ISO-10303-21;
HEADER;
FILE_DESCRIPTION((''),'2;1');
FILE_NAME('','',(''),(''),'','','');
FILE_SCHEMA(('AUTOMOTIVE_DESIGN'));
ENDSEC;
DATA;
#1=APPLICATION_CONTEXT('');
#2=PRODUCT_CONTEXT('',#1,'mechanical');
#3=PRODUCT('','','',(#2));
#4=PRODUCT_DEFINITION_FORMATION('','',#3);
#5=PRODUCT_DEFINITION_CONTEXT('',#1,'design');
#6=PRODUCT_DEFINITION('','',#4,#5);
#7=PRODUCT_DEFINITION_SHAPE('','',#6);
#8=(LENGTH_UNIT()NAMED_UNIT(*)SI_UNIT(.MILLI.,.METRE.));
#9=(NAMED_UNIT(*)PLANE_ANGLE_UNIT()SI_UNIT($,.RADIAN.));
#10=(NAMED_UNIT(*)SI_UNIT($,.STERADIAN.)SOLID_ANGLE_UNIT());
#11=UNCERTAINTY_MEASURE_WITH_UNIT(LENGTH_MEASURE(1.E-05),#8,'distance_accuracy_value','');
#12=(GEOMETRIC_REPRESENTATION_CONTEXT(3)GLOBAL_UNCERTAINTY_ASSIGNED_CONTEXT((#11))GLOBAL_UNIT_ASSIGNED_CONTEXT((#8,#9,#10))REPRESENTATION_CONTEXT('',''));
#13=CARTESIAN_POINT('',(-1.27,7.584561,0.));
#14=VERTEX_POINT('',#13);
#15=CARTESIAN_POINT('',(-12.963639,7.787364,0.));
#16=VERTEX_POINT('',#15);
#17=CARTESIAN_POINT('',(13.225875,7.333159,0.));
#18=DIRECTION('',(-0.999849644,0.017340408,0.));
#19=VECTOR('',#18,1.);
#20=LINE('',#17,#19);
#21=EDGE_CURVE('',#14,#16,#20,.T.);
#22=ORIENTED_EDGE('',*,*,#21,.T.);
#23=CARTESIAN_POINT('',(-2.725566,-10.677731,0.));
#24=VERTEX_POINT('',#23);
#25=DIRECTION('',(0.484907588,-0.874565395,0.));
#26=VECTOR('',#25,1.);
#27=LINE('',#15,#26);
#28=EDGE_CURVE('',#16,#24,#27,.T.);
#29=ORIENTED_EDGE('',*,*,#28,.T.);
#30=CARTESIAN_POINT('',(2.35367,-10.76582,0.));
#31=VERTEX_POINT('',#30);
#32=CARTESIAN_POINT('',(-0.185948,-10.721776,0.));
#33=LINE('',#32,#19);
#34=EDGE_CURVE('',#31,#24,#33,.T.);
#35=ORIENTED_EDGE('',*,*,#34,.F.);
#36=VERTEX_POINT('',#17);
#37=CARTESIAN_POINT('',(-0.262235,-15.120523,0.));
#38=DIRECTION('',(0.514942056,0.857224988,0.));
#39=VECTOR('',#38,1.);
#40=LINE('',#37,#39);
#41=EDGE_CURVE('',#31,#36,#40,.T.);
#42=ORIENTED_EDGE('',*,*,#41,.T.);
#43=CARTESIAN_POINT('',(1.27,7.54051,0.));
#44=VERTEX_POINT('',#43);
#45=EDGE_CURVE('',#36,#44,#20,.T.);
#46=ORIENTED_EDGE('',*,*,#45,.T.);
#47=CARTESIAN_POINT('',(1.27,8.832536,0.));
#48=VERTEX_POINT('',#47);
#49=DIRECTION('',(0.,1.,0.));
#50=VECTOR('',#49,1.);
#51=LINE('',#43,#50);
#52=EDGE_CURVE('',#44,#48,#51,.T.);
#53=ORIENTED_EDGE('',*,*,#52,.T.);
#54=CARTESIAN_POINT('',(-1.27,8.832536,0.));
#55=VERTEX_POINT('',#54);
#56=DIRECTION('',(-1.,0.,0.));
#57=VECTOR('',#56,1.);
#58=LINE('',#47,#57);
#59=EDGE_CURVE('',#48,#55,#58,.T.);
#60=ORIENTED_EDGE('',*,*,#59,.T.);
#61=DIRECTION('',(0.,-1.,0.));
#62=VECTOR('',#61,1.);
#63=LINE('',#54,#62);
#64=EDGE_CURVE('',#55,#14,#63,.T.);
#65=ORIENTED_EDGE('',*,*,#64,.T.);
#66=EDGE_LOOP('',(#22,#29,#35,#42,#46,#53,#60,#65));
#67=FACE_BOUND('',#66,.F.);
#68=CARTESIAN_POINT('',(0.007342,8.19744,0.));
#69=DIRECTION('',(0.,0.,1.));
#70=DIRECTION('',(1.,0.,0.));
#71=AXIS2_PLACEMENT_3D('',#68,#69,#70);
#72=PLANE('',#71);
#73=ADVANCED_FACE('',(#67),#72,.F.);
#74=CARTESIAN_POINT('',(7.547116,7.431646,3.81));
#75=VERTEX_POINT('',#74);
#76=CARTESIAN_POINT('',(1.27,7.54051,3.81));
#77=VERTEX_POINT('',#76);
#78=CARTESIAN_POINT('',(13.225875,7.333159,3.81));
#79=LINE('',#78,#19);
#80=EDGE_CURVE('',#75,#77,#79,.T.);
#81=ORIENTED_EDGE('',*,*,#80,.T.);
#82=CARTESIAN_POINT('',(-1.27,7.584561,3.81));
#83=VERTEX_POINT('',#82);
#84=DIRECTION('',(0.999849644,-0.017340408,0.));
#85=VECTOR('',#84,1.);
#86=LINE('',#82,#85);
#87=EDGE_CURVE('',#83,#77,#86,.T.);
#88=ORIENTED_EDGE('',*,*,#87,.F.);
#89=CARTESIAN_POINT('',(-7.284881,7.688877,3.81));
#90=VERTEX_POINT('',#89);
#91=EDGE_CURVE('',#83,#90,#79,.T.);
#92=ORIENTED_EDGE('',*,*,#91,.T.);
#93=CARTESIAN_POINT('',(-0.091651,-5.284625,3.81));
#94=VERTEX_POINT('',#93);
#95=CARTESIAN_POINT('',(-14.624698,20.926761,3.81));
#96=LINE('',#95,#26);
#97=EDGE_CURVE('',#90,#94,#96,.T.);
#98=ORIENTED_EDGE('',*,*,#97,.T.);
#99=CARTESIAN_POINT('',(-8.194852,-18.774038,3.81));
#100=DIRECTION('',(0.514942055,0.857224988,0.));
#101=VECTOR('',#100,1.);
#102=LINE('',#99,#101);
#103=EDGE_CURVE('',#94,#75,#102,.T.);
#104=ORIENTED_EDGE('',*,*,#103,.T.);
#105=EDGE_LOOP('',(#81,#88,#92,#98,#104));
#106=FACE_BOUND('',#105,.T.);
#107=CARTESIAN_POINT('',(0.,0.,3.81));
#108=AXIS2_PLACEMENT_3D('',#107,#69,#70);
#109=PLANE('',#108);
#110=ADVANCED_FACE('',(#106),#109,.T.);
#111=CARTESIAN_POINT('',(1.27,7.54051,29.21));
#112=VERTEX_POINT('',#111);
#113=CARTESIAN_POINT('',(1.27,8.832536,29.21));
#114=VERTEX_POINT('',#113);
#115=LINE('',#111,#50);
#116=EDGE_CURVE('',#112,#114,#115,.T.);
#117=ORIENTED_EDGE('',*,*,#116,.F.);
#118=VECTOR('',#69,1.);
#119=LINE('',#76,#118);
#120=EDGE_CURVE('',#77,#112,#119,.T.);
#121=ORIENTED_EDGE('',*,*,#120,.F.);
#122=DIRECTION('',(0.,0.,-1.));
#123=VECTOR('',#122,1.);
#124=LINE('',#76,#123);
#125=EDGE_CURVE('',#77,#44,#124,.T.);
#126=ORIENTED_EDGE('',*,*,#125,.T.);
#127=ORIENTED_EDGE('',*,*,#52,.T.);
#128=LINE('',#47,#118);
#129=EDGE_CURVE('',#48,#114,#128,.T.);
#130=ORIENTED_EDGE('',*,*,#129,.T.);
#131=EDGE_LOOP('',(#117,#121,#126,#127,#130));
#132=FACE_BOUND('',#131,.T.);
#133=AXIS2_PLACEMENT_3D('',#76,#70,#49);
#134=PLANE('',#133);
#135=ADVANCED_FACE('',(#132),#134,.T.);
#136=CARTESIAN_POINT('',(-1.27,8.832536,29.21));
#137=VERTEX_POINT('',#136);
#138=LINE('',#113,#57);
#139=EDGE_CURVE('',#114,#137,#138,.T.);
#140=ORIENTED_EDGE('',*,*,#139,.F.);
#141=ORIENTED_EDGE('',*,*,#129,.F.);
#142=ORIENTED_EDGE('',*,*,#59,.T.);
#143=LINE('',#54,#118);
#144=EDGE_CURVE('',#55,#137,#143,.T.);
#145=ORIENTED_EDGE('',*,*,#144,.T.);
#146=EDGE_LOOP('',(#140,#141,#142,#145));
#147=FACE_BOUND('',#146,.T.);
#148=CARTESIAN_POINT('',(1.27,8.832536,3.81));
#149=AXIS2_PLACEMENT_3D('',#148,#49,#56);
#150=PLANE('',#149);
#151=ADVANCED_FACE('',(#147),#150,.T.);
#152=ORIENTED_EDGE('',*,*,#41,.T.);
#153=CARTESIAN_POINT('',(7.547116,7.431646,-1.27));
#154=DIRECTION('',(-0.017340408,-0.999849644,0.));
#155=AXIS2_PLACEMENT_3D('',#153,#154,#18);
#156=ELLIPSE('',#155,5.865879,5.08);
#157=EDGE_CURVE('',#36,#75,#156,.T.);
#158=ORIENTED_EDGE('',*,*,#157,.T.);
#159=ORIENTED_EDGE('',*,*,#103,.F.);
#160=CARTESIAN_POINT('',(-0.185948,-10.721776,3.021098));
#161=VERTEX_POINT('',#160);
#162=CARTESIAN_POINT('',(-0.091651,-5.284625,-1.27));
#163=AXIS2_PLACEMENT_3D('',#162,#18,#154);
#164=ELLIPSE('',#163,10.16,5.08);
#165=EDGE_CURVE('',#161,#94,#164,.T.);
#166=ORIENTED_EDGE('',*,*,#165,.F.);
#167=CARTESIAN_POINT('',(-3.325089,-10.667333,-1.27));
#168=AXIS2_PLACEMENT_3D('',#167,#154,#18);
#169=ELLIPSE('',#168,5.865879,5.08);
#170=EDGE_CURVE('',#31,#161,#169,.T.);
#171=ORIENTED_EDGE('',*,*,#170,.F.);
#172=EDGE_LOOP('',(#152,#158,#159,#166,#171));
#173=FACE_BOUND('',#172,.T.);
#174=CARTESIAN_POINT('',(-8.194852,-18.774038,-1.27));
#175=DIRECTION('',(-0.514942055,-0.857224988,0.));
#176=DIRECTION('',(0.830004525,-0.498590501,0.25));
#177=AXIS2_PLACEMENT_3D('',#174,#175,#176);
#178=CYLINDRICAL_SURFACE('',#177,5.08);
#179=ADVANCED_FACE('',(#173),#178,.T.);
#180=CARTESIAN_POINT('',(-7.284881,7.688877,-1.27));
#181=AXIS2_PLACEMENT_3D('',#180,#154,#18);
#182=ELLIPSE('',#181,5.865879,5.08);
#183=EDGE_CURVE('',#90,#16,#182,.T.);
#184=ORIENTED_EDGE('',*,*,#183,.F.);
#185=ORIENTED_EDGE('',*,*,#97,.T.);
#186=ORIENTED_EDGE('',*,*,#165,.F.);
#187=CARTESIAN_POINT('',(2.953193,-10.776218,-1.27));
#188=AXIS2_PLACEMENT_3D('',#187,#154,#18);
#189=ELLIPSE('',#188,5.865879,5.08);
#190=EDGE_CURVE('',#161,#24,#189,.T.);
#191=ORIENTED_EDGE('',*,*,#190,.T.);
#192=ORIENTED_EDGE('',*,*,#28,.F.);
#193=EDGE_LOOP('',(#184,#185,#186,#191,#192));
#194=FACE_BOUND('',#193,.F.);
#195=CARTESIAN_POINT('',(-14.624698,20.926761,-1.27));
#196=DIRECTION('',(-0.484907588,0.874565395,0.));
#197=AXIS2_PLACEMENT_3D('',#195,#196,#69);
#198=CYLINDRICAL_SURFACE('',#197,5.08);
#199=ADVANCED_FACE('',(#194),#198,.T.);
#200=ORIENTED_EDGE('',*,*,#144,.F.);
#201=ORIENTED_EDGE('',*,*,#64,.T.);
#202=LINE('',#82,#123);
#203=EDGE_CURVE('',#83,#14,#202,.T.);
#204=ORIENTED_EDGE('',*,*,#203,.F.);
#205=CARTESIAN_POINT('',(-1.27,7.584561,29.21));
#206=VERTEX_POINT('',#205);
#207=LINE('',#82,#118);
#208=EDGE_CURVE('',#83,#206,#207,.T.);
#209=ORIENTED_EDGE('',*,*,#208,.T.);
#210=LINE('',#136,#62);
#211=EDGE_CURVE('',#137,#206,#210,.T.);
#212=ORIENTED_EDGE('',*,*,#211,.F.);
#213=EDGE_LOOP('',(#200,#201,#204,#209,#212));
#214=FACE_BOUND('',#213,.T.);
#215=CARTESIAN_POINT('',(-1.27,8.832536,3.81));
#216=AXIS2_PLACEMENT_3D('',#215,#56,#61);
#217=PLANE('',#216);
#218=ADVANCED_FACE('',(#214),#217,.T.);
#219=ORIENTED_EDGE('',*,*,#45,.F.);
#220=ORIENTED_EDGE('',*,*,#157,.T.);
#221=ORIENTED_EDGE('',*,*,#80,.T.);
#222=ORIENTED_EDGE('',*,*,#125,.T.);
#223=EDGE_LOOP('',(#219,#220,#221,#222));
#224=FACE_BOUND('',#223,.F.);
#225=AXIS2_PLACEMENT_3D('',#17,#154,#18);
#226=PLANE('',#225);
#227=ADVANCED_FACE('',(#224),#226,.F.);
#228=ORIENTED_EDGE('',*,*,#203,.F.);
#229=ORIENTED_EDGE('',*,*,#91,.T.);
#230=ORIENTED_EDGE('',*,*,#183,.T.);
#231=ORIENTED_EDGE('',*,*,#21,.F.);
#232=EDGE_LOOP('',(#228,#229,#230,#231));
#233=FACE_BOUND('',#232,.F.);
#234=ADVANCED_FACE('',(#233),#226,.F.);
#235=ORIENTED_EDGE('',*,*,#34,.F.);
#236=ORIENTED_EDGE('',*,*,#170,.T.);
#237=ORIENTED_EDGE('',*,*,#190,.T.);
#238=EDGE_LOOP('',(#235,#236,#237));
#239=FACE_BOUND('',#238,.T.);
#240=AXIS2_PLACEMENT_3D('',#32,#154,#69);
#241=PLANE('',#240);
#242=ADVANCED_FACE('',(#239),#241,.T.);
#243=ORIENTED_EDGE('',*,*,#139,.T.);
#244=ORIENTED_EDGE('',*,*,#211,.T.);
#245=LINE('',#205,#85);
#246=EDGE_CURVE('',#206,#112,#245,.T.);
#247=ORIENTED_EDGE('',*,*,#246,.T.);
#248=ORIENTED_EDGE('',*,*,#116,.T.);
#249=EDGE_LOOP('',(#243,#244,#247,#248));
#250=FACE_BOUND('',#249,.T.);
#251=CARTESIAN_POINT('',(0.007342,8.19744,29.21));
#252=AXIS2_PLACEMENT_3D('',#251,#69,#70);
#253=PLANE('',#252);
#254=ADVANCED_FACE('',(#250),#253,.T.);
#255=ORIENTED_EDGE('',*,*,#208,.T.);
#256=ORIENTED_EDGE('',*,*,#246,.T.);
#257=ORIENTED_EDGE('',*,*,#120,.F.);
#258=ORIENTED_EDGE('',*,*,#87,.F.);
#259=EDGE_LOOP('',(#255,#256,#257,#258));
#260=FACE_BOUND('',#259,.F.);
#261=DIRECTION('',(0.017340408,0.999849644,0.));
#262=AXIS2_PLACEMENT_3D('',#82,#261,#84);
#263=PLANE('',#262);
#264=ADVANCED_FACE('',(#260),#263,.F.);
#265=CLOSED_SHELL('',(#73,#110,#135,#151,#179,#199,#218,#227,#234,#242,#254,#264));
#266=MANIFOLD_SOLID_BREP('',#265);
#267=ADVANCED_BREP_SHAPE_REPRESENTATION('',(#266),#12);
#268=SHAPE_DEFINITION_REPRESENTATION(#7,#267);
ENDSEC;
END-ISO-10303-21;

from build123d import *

# Parameters (mm, degrees)
F1_DEPTH      = 3.81
F2_SIZE       = 5.08
F3_T1_DEPTH   = 45.7068968586
F3_T3_DEPTH   = 45.7068968586
F5_DEPTH      = 25.4
F5_DEPTH_BACK = 3.81


# Not quite as in the source:
# - a fillet or chamfer that OpenCascade refuses, or shapes differently, is made with other operations: its cross-section is extruded or revolved along the edge and cut away or added


with BuildPart() as f1:
    # F0 (on Top) → F1 (new body)
    with BuildSketch(Plane.XY):
        Polygon((-0.2622354642, -15.1205231096), (13.2258748636, 7.3331589811), (-12.9636393994, 7.7873641286), align=None)
    extrude(amount=F1_DEPTH)

    # F2
    f2_edges = [f1.edges().sort_by_distance(p)[0] for p in [
        (-0.262235, -15.120523, 1.905),
    ]]
    chamfer(f2_edges, length=F2_SIZE)

    # F3: fillet of radius 5.08 on 2 edges, made by hand

    # F3_s2 → F3_t1 (cut)
    with BuildSketch(Plane(origin=(-10.4602488885, -17.4131955793, 0), x_dir=(0, 0, 1), z_dir=(0.5149420555, 0.8572249877, 0))):
        with BuildLine():
            ThreePointArc((0, 7.5613984578), (2.7460926284, 5.7535615814), (3.81, 2.6427096081))
            Line((3.81, 2.6427096081), (3.81, 7.5613984578))
            Line((3.81, 7.5613984578), (0, 7.5613984578))
        make_face()
    extrude(amount=F3_T1_DEPTH, mode=Mode.SUBTRACT)

    # F3_s4 → F3_t3 (cut)
    with BuildSketch(Plane(origin=(-12.3134758372, 22.2082312655, 0), x_dir=(0, 0, 1), z_dir=(0.4849075883, -0.8745653954, 0))):
        with BuildLine():
            ThreePointArc((3.81, 2.6427096081), (2.7460926284, 5.7535615814), (0, 7.5613984578))
            Line((0, 7.5613984578), (3.81, 7.5613984578))
            Line((3.81, 7.5613984578), (3.81, 2.6427096081))
        make_face()
    extrude(amount=F3_T3_DEPTH, mode=Mode.SUBTRACT)

    # F4 (on face) → F5 (join, two sides)
    with BuildSketch(Plane.XY.offset(3.81)) as f5_sk:
        Polygon((1.27, 7.5405099022), (1.27, 8.8325355317), (-1.27, 8.8325355317), (-1.27, 7.5845611611), align=None)
    extrude(amount=F5_DEPTH)
    extrude(f5_sk.sketch, amount=-F5_DEPTH_BACK)


solid = f1.part
